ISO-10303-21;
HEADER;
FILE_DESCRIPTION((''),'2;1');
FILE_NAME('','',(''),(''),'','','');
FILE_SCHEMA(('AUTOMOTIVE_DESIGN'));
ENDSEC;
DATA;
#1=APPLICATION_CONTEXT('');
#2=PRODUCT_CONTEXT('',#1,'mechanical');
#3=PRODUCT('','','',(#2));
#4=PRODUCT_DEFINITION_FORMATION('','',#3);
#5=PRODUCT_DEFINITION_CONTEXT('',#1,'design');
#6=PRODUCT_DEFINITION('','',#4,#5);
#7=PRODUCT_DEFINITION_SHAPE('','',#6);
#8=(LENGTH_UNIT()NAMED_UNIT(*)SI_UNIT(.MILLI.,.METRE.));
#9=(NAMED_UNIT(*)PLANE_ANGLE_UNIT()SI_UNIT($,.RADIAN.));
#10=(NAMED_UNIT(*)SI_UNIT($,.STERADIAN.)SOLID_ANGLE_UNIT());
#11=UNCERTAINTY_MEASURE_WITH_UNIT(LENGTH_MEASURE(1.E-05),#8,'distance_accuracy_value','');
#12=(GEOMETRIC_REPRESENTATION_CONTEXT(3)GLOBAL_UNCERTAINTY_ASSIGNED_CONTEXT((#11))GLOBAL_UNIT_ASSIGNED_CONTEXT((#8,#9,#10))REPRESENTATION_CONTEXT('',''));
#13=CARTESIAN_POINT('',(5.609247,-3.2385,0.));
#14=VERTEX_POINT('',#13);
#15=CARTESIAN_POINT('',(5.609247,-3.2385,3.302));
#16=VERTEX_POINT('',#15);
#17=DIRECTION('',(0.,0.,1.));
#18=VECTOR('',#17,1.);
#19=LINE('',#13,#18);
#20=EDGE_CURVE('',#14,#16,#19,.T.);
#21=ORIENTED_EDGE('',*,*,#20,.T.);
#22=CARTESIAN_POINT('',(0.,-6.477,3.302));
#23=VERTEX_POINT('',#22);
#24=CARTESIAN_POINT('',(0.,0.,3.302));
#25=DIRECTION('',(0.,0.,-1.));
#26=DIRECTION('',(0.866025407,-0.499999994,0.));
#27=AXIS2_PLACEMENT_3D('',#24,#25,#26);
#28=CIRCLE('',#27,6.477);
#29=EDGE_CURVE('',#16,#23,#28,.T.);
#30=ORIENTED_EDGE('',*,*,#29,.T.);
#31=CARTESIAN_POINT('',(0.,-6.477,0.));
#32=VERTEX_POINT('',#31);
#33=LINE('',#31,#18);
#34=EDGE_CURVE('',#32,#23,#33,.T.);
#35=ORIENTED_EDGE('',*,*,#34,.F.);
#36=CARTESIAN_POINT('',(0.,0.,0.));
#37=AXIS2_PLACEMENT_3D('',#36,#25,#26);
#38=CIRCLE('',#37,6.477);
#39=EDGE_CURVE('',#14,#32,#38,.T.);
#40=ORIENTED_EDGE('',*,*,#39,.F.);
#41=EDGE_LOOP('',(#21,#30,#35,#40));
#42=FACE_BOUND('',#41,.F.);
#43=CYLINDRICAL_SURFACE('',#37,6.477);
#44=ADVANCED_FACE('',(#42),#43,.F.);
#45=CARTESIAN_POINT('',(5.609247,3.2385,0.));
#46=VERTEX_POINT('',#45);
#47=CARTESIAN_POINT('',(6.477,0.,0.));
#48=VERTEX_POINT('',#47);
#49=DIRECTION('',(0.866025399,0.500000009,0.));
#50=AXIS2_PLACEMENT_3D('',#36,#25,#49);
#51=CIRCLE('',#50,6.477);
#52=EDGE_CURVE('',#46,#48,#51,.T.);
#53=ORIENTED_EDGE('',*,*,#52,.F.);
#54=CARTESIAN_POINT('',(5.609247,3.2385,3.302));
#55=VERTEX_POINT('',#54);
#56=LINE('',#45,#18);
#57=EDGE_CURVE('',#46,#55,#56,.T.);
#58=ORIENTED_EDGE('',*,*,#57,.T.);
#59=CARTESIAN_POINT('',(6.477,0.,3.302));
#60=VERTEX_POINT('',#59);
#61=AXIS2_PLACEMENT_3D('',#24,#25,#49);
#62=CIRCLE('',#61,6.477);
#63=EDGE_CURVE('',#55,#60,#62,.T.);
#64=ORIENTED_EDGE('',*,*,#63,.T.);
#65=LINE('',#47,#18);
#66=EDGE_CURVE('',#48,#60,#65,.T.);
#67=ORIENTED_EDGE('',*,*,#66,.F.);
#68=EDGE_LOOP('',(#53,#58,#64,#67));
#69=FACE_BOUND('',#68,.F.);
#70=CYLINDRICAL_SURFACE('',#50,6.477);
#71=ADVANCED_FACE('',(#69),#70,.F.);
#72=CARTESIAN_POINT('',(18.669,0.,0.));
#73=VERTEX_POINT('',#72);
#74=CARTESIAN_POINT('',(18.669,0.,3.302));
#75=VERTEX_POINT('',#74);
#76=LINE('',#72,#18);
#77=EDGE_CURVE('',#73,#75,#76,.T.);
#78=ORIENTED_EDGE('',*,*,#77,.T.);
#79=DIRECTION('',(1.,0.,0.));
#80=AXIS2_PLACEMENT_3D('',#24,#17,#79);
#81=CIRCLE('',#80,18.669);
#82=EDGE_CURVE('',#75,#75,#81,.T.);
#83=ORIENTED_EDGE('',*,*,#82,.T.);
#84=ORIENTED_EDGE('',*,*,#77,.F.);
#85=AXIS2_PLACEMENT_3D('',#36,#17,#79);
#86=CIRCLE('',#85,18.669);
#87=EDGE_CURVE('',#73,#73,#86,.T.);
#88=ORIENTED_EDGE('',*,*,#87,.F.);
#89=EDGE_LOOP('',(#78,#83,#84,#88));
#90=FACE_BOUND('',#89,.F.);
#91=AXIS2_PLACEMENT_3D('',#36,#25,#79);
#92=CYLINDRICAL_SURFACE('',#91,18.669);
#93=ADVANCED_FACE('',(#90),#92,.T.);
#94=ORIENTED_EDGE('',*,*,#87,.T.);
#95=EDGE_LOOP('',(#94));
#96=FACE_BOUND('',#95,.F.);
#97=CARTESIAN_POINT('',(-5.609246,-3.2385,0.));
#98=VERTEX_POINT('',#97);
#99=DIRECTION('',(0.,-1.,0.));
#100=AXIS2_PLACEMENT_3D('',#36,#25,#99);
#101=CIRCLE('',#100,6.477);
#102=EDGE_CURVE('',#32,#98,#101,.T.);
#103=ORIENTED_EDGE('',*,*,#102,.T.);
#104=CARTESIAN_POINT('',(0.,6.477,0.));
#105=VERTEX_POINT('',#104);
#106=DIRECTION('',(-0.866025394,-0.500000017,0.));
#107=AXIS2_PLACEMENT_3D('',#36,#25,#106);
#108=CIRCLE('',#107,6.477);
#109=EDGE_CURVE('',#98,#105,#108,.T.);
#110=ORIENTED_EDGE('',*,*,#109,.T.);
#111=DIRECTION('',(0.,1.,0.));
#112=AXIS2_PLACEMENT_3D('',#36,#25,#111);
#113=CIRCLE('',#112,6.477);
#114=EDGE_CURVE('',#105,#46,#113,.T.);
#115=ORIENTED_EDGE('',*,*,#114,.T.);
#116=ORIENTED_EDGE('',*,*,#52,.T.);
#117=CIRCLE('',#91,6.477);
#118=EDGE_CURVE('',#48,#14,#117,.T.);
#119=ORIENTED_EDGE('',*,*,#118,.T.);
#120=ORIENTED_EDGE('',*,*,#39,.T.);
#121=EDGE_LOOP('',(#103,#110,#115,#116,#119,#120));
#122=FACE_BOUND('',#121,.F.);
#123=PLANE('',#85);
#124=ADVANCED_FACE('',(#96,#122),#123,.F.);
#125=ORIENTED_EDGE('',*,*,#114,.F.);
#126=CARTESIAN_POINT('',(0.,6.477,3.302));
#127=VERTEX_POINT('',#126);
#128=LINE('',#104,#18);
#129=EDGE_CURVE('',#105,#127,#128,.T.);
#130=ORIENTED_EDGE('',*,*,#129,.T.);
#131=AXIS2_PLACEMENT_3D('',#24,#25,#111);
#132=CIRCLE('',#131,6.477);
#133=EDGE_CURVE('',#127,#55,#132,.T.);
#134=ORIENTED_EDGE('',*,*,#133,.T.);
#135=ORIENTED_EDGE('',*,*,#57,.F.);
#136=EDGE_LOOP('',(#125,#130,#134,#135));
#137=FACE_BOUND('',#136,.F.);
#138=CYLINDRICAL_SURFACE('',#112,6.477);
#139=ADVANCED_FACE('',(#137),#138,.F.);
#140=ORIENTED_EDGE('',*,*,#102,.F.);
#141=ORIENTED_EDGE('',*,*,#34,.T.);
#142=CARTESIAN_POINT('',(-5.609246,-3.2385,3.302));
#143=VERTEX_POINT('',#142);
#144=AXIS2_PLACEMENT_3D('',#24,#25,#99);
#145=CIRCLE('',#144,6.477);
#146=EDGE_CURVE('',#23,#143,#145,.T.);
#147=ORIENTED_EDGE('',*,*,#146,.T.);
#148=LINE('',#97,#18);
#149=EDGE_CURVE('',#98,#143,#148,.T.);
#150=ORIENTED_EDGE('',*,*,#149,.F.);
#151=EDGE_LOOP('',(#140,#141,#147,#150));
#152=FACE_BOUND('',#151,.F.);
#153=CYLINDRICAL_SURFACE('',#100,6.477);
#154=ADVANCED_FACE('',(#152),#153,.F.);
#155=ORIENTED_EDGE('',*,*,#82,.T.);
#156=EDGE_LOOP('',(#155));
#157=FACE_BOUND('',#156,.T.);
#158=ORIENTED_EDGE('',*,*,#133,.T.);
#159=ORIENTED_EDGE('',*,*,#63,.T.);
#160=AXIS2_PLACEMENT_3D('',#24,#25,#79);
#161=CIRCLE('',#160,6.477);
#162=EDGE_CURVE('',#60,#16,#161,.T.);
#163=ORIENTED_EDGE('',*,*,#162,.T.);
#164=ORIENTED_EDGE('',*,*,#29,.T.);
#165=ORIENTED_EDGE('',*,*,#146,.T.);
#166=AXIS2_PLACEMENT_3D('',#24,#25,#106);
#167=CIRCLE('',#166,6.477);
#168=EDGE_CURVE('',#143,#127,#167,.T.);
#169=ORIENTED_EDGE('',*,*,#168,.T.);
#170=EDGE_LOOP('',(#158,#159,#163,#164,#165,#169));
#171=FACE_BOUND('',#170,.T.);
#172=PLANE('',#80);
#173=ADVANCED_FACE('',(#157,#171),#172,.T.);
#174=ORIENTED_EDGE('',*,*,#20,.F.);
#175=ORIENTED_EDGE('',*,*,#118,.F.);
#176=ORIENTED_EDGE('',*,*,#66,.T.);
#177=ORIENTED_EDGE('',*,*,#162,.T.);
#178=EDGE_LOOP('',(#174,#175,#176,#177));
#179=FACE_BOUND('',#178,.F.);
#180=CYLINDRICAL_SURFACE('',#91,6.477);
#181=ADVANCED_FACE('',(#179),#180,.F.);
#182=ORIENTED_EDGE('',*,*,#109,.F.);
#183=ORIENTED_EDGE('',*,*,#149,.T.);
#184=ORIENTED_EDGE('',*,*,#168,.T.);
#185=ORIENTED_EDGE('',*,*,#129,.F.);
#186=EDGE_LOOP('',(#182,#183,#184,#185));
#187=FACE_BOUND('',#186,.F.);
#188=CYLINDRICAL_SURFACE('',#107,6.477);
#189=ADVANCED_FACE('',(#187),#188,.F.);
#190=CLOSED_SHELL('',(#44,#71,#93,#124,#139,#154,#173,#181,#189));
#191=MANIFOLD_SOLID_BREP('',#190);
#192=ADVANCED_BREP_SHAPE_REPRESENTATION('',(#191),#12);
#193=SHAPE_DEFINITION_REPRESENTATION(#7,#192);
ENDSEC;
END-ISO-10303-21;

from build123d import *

# Parameters (mm, degrees)
F0_R     = 18.669
F1_DEPTH = 3.302


# Not quite as in the source:
# - a length typed as a fraction of an inch, garbled in the dataset ("3 / 203.2 mm" for 3/8 in), is restored


with BuildPart() as f1:
    # F0 (on Top) → F1 (new body)
    with BuildSketch(Plane.XY):
        Circle(F0_R)
        Polygon((-5.6092465283, 3.2385000208), (-3.7394976935, 6.477), (0, 6.477), (3.7394976935, 6.477), (5.6092465069, 3.238500058), (7.4789953871, 0), (5.6092465631, -3.2384999606), (3.7394976935, -6.477), (0, -6.477), (-3.7394976935, -6.477), (-5.6092464752, -3.2385001127), (-7.4789953871, 0), align=None, mode=Mode.SUBTRACT)
        with BuildLine():
            Line((0, 6.477), (-3.7394976935, 6.477))
            Line((-3.7394976935, 6.477), (-5.6092465283, 3.2385000208))
            ThreePointArc((-5.6092465283, 3.2385000208), (-3.2384999896, 5.6092465463), (0, 6.477))
        make_face()
        with BuildLine():
            Line((3.7394976935, 6.477), (0, 6.477))
            ThreePointArc((0, 6.477), (3.238499971, 5.609246557), (5.6092465069, 3.238500058))
            Line((5.6092465069, 3.238500058), (3.7394976935, 6.477))
        make_face()
        with BuildLine():
            ThreePointArc((5.6092465631, -3.2384999606), (3.2385000197, -5.6092465289), (0, -6.477))
            Line((0, -6.477), (3.7394976935, -6.477))
            Line((3.7394976935, -6.477), (5.6092465631, -3.2384999606))
        make_face()
        with BuildLine():
            Line((7.4789953871, 0), (5.6092465069, 3.238500058))
            ThreePointArc((5.6092465069, 3.238500058), (6.2563015682, 1.6763709874), (6.477, 0))
            ThreePointArc((6.477, 0), (6.2563015828, -1.6763709332), (5.6092465631, -3.2384999606))
            Line((5.6092465631, -3.2384999606), (7.4789953871, 0))
        make_face()
        with BuildLine():
            ThreePointArc((0, -6.477), (-3.2384999437, -5.6092465728), (-5.6092464752, -3.2385001127))
            Line((-5.6092464752, -3.2385001127), (-3.7394976935, -6.477))
            Line((-3.7394976935, -6.477), (0, -6.477))
        make_face()
        with BuildLine():
            ThreePointArc((-5.6092464752, -3.2385001127), (-6.477, -5.31e-08), (-5.6092465283, 3.2385000208))
            Line((-5.6092465283, 3.2385000208), (-7.4789953871, 0))
            Line((-7.4789953871, 0), (-5.6092464752, -3.2385001127))
        make_face()
    extrude(amount=F1_DEPTH)


solid = f1.part
